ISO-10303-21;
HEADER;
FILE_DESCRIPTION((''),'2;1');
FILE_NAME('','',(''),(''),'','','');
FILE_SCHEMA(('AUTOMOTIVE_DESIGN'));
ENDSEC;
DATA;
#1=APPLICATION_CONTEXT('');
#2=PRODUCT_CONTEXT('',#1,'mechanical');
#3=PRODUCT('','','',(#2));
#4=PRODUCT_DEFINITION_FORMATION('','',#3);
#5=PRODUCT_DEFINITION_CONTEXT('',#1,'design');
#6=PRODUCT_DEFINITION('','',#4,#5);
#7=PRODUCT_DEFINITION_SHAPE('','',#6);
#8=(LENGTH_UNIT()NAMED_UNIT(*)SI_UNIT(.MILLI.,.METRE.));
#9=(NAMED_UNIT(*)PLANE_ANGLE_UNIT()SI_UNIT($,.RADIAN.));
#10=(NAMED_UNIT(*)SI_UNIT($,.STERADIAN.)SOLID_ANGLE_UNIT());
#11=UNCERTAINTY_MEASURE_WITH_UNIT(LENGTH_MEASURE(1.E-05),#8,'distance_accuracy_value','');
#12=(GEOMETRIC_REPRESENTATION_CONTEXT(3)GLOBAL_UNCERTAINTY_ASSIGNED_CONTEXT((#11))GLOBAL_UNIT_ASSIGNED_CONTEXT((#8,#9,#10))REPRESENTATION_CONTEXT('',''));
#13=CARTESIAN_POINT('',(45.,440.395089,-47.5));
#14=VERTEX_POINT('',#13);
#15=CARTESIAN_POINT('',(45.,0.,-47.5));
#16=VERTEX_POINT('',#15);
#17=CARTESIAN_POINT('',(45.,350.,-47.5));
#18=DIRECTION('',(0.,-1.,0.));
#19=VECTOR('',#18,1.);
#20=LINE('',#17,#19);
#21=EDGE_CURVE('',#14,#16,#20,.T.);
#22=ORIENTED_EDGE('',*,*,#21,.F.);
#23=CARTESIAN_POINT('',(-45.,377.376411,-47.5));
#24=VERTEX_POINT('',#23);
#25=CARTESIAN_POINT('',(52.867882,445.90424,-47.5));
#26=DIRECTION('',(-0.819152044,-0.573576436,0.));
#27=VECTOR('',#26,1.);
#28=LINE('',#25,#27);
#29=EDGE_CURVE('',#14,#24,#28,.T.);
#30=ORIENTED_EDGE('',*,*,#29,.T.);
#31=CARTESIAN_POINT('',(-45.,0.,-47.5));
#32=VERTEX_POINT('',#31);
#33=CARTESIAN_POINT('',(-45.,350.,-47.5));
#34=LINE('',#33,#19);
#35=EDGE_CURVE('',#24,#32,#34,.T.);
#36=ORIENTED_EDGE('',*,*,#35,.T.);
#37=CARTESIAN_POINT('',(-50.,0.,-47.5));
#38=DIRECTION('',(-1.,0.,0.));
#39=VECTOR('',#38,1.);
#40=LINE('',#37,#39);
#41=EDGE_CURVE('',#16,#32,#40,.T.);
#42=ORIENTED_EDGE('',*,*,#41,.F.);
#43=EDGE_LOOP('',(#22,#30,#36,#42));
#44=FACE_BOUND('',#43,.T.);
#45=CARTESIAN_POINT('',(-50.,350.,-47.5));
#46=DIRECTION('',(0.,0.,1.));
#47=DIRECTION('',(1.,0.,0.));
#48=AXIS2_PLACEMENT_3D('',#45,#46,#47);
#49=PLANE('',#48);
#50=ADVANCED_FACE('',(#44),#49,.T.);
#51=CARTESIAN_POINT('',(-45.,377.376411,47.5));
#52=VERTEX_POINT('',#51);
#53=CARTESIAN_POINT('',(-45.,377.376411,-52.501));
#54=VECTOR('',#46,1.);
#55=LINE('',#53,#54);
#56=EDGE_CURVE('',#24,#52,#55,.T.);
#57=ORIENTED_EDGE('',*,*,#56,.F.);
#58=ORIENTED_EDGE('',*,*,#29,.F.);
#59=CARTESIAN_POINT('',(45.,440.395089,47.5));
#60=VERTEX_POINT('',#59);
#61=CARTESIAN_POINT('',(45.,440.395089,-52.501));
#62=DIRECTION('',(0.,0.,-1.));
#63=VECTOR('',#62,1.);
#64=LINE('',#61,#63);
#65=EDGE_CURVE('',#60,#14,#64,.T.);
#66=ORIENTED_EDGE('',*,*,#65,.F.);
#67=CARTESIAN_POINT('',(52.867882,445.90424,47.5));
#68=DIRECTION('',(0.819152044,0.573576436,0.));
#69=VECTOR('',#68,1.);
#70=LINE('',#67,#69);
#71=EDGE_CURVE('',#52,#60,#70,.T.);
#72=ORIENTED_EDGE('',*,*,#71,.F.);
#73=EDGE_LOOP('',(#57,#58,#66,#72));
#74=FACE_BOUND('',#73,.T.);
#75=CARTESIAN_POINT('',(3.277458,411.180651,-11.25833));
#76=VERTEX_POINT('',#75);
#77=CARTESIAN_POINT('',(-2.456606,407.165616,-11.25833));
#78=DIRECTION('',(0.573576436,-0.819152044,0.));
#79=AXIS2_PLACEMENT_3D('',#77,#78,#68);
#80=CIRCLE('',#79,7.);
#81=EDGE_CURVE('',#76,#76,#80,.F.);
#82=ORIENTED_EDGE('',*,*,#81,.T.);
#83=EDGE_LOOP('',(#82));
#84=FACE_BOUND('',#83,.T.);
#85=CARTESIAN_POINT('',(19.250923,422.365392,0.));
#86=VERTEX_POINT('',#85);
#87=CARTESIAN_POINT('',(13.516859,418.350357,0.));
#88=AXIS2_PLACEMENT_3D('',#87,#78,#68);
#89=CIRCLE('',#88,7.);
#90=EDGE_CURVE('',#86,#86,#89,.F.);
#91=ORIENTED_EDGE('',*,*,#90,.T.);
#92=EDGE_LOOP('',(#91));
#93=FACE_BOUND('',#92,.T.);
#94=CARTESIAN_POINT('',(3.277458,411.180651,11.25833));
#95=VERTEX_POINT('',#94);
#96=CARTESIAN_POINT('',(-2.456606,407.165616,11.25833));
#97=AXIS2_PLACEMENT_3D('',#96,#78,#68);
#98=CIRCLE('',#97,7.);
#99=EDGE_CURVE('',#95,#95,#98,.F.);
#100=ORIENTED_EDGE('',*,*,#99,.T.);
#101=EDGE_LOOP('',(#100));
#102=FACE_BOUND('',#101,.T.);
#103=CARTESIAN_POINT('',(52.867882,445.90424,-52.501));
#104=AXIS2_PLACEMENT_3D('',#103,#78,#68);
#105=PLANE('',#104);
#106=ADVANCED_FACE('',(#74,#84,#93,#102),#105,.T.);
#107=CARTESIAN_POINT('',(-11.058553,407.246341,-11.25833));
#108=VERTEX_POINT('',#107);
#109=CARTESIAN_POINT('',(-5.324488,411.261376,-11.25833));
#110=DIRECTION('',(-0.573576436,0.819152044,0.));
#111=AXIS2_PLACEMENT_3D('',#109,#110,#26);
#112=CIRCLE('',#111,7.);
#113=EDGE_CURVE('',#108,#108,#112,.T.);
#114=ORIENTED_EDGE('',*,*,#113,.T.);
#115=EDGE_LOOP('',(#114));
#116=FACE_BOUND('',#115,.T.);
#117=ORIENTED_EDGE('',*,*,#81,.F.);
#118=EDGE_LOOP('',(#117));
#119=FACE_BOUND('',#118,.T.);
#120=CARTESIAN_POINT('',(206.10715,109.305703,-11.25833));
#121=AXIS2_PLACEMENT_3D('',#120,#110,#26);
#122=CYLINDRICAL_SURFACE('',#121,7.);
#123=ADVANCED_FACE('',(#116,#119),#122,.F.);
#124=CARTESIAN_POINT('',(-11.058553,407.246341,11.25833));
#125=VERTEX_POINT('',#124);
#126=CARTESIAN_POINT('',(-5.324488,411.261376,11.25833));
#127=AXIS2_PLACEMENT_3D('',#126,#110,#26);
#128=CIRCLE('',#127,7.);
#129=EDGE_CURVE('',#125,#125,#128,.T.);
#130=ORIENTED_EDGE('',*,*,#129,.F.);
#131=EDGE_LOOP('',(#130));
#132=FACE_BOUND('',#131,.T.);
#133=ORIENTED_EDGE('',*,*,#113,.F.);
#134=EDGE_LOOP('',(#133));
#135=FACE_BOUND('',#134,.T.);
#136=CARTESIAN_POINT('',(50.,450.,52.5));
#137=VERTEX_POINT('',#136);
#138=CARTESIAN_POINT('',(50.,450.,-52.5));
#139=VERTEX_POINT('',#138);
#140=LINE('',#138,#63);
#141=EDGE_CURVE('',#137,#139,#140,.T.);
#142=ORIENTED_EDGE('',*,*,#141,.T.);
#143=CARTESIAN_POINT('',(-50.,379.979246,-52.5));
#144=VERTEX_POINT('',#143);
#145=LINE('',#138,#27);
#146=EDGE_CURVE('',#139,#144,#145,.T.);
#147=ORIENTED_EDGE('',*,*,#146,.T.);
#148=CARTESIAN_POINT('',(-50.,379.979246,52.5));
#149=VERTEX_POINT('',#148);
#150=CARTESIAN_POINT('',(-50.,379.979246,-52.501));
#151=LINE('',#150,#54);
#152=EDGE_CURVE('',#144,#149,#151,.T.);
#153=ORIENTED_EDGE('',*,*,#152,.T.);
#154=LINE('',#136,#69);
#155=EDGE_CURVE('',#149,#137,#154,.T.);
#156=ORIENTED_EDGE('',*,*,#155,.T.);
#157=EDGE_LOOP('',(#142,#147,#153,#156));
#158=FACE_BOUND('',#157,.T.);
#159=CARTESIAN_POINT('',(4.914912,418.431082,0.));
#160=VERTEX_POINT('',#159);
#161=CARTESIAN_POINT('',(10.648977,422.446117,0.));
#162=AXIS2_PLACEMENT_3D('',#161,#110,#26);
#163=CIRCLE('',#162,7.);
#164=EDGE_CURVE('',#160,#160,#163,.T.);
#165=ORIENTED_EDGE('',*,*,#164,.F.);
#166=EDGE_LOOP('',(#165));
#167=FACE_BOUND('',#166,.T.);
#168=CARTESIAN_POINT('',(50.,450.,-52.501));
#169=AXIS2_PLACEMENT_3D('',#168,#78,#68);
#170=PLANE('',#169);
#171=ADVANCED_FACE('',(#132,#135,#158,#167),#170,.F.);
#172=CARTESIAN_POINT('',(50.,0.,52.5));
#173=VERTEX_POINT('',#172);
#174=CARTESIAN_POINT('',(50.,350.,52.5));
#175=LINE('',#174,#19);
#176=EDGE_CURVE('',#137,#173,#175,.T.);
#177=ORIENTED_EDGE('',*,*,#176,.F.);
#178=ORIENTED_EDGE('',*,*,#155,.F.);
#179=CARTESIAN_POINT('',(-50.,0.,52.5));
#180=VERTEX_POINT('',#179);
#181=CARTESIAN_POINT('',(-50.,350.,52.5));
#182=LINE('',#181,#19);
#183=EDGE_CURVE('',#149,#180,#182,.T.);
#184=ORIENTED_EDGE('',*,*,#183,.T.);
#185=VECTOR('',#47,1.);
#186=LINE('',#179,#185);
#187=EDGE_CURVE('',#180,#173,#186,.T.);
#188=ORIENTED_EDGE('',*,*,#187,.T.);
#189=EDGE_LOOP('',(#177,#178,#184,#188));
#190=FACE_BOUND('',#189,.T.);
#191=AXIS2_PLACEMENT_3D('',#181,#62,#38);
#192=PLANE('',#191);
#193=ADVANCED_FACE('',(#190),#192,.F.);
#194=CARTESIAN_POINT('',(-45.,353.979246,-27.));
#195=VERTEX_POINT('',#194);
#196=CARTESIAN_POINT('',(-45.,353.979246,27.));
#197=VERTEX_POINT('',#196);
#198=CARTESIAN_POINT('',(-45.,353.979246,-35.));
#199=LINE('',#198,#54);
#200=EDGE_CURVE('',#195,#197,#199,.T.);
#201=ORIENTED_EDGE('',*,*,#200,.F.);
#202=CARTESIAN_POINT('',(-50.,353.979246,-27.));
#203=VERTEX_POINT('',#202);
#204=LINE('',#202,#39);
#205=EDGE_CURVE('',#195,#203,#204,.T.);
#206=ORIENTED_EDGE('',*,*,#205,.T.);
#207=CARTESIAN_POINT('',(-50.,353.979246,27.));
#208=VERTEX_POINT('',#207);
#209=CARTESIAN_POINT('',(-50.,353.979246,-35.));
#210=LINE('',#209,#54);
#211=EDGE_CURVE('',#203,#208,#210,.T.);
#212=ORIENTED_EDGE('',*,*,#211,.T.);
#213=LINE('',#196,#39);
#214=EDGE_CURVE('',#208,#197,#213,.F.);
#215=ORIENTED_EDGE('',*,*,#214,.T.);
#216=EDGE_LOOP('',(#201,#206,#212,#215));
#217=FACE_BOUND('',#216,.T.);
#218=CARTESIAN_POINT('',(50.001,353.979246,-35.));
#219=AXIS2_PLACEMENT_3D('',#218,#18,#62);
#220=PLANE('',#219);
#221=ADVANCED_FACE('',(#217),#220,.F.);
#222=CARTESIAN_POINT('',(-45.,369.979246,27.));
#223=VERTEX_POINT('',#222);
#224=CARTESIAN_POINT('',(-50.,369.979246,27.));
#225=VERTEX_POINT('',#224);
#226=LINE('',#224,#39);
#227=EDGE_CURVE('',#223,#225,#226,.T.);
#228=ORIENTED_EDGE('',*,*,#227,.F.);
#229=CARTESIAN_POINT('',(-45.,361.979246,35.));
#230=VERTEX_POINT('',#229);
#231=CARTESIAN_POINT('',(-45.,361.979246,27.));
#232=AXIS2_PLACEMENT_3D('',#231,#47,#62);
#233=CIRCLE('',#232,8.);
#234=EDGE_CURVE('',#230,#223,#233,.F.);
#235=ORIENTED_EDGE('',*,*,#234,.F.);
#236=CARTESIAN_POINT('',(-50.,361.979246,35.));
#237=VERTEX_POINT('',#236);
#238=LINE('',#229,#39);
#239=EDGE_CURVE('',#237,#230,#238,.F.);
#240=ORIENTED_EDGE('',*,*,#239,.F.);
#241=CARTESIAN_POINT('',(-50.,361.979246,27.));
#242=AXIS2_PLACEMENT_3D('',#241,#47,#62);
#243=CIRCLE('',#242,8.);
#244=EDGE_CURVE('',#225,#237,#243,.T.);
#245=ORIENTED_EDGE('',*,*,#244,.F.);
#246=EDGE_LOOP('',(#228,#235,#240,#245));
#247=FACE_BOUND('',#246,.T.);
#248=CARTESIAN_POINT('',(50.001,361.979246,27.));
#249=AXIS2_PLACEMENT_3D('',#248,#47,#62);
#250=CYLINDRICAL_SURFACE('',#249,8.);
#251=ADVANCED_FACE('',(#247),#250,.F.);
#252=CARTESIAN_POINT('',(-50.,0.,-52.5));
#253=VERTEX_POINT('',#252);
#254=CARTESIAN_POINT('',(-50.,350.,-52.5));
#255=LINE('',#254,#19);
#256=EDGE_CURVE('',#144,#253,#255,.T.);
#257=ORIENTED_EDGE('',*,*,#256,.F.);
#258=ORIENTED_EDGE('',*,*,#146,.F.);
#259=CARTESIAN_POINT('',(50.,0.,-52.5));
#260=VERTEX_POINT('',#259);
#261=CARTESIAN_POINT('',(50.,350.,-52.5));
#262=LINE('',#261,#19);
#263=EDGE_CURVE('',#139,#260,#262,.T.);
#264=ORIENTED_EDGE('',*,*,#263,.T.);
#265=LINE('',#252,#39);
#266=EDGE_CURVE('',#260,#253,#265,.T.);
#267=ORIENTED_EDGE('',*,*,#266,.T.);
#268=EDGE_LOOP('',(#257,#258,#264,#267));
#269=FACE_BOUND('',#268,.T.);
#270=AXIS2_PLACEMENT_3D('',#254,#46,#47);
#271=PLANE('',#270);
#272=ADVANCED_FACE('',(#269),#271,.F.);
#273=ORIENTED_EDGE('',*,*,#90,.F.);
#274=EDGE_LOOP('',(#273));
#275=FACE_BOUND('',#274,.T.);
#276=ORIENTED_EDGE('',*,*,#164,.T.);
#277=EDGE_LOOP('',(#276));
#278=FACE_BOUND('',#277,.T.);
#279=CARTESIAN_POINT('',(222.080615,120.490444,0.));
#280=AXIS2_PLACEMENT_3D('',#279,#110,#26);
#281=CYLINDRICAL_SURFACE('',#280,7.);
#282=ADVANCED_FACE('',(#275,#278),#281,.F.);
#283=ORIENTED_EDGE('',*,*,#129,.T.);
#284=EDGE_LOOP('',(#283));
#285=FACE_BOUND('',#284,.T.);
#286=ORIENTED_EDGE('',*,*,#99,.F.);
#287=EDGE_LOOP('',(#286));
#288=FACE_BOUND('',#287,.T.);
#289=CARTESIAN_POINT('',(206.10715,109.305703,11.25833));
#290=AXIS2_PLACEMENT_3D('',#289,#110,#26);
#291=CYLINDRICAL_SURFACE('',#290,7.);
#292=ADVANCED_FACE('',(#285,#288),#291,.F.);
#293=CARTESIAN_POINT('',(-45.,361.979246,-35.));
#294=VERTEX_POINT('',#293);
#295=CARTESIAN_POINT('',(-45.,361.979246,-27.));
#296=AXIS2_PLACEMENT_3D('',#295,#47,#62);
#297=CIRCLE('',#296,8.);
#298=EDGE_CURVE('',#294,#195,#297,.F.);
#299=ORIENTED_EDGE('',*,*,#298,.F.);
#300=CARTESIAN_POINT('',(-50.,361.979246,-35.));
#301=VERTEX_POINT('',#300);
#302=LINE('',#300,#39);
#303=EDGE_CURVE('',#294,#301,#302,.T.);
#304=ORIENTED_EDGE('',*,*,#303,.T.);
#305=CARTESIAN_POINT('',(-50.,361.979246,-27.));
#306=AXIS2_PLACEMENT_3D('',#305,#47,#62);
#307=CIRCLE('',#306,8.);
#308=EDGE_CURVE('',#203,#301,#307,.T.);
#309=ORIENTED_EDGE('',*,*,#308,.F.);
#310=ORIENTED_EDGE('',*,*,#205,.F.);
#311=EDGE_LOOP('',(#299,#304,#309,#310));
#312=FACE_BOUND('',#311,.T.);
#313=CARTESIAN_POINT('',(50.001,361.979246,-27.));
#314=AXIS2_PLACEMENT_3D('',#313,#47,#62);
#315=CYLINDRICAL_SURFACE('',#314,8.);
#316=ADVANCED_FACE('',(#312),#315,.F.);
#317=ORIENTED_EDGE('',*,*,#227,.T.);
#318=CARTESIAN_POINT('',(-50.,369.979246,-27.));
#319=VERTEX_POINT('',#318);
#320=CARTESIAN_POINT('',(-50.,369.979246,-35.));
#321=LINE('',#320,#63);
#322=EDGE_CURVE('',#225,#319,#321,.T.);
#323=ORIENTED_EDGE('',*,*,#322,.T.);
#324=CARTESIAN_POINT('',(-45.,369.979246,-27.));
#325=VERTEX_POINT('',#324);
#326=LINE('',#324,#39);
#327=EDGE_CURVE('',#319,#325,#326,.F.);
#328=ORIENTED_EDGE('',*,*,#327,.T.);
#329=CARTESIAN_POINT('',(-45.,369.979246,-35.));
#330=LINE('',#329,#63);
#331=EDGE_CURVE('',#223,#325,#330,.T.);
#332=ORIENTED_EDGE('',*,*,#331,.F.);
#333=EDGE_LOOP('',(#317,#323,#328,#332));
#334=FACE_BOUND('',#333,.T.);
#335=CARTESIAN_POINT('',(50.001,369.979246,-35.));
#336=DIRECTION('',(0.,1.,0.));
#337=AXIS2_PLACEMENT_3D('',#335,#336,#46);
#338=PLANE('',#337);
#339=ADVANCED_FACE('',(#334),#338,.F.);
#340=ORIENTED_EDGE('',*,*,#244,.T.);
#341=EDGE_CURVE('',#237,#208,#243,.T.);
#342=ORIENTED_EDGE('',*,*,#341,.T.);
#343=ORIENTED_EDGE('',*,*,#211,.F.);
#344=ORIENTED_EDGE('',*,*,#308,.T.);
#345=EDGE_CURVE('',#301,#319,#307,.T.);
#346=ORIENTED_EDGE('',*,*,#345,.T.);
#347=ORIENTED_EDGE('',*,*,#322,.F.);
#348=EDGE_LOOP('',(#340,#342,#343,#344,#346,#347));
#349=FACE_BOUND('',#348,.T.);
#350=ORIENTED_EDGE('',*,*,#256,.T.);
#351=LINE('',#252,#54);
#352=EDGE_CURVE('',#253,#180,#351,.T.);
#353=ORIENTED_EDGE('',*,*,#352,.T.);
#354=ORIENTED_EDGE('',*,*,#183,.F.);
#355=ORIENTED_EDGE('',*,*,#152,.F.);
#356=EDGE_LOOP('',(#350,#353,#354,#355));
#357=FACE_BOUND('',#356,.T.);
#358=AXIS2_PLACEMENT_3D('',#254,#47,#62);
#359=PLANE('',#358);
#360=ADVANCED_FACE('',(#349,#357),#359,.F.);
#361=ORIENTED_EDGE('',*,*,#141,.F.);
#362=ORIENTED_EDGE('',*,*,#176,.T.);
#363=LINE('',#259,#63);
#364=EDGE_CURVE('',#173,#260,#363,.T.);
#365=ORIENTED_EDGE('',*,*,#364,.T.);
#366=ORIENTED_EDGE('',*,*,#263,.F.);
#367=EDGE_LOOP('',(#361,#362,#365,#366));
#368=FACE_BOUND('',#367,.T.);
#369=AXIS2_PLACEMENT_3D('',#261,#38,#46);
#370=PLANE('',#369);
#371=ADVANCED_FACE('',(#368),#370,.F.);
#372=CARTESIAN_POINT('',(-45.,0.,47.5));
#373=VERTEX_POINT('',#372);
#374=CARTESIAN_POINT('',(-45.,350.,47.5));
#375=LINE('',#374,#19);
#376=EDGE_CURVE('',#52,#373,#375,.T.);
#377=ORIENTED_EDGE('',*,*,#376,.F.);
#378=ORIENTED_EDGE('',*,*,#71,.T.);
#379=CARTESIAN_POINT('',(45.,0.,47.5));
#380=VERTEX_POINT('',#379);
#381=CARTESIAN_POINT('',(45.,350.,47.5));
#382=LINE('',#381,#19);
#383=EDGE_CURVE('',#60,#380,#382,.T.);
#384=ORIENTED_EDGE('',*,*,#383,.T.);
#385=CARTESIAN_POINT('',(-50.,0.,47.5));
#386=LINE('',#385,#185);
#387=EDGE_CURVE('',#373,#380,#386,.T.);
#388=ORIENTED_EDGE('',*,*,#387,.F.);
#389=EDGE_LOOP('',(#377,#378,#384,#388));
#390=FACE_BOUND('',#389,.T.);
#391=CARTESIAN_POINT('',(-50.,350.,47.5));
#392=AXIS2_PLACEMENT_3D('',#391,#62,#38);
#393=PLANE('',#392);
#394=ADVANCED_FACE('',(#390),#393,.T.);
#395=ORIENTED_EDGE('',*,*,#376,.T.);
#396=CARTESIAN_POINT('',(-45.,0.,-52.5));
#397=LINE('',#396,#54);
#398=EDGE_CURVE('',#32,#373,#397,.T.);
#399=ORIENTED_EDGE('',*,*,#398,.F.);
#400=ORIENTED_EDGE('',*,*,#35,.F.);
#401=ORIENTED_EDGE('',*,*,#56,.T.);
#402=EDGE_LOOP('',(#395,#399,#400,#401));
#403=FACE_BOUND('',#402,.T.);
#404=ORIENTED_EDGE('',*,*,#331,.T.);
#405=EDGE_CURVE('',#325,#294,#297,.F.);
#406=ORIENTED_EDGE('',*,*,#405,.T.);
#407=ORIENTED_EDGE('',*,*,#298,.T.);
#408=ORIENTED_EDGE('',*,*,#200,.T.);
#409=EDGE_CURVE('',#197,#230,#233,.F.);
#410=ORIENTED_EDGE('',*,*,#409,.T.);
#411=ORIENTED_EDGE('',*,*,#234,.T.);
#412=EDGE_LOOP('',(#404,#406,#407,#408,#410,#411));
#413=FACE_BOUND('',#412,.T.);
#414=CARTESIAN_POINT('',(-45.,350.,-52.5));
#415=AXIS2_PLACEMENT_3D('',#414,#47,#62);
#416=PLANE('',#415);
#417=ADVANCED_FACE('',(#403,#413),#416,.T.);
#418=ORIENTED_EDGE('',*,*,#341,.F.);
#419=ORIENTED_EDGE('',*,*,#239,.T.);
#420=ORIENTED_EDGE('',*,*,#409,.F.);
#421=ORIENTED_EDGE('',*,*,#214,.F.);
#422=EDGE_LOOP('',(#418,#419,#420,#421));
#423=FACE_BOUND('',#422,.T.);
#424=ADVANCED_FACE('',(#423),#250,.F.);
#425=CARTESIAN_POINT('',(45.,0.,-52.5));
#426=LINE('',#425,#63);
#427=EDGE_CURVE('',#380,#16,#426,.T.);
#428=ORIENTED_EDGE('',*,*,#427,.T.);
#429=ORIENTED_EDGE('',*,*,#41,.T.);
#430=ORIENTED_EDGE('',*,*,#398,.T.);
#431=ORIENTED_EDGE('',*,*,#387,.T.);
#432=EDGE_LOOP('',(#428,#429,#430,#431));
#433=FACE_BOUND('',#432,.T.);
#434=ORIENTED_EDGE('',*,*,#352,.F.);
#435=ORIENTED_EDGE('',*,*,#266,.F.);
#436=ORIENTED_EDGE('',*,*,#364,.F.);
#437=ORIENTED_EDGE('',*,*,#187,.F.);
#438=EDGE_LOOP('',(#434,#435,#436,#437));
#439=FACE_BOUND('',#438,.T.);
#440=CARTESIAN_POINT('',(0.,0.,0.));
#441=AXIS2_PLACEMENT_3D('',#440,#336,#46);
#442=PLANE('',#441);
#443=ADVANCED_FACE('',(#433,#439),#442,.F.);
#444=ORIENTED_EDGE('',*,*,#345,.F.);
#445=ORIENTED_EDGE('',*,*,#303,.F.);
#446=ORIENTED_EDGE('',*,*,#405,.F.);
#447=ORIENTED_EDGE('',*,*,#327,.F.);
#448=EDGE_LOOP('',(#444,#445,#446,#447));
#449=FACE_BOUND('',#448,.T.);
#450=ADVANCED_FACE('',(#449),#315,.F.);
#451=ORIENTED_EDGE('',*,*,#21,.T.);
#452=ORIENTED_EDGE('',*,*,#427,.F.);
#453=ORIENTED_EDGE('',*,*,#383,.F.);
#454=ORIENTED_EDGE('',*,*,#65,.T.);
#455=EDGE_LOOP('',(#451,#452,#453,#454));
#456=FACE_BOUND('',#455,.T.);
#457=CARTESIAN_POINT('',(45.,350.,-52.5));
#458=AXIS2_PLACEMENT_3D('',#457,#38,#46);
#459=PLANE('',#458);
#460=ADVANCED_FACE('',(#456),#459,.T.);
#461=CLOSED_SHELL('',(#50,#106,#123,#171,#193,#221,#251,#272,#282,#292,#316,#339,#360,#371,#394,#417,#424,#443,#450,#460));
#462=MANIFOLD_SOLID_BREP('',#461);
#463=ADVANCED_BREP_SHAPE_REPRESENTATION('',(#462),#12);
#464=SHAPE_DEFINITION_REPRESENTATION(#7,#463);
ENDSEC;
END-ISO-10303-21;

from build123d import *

# Parameters (mm, degrees)
SKETCH1_W           = 100
SKETCH1_H           = 105
BOSS_EXTRUDE1_DEPTH = 350
SKETCH2_W           = 100
SKETCH2_H           = 105
BOSS_EXTRUDE2_DEPTH = 100
CUT_EXTRUDE1_REACH  = 466.785
SHELL1_T            = -5
CUT_EXTRUDE2_REACH  = 376.584
SKETCH4_R           = 7
CUT_EXTRUDE3_REACH  = 465.957
SKETCH5_W           = 70
SKETCH5_H           = 16
FILLET1_R           = 8


with BuildPart() as part:
    # Sketch1 → Boss-Extrude1 (new body)
    with BuildSketch(Plane(origin=(0, 0, 0), x_dir=(1, 0, 0), z_dir=(0, 1, 0))):
        Rectangle(SKETCH1_W, SKETCH1_H)
    extrude(amount=BOSS_EXTRUDE1_DEPTH)

    # Sketch2 → Boss-Extrude2 (add)
    with BuildSketch(Plane(origin=(0, 350, 0), x_dir=(1, 0, 0), z_dir=(0, 1, 0))):
        Rectangle(SKETCH2_W, SKETCH2_H)
    extrude(amount=BOSS_EXTRUDE2_DEPTH)

    # Sketch3 → Cut-Extrude1 (cut, up to next)
    with BuildSketch(Plane.XY.offset(52.5), mode=Mode.PRIVATE) as cut_extrude1_sk1:
        Polygon((-50, 450), (50, 450), (-50, 379.979246179), align=None)
    cut_extrude1_tool1 = extrude(cut_extrude1_sk1.sketch, amount=-CUT_EXTRUDE1_REACH, mode=Mode.PRIVATE) & part.part
    add(cut_extrude1_tool1.solids().sort_by_distance((-16.666667, 426.659749, 52.5))[0], mode=Mode.SUBTRACT)

    # Shell1
    shell1_openings = [part.faces().sort_by_distance(p)[0] for p in [
        (0, 0, 0),
    ]]
    offset(amount=SHELL1_T, openings=shell1_openings, kind=Kind.INTERSECTION)

    # Sketch4 → Cut-Extrude2 (cut, up to next)
    with BuildSketch(Plane(origin=(-194.98134326, 278.462216729, 0), x_dir=(0.8191520442889949, 0.5735764363510417, 0), z_dir=(-0.5735764363510417, 0.819152044288995, 0)), mode=Mode.PRIVATE) as cut_extrude2_sk1:
        with Locations(Location((251.028269134, 0, 0), (0, 0, 180))):
            Circle(SKETCH4_R)
    cut_extrude2_tool1 = extrude(cut_extrude2_sk1.sketch, amount=-CUT_EXTRUDE2_REACH, mode=Mode.PRIVATE) & part.part
    # Sketch4 → Cut-Extrude2 (cut, up to next)
    with BuildSketch(Plane(origin=(-194.98134326, 278.462216729, 0), x_dir=(0.8191520442889949, 0.5735764363510417, 0), z_dir=(-0.5735764363510417, 0.819152044288995, 0)), mode=Mode.PRIVATE) as cut_extrude2_sk2:
        with Locations(Location((231.528269134, -11.258330249, 0), (0, 0, 180))):
            Circle(SKETCH4_R)
    cut_extrude2_tool2 = extrude(cut_extrude2_sk2.sketch, amount=-CUT_EXTRUDE2_REACH, mode=Mode.PRIVATE) & part.part
    # Sketch4 → Cut-Extrude2 (cut, up to next)
    with BuildSketch(Plane(origin=(-194.98134326, 278.462216729, 0), x_dir=(0.8191520442889949, 0.5735764363510417, 0), z_dir=(-0.5735764363510417, 0.819152044288995, 0)), mode=Mode.PRIVATE) as cut_extrude2_sk3:
        with Locations(Location((231.528269134, 11.258330249, 0), (0, 0, 180))):
            Circle(SKETCH4_R)
    cut_extrude2_tool3 = extrude(cut_extrude2_sk3.sketch, amount=-CUT_EXTRUDE2_REACH, mode=Mode.PRIVATE) & part.part
    add(cut_extrude2_tool1.solids().sort_by_distance((10.648977, 422.446117, 0))[0], mode=Mode.SUBTRACT)
    add(cut_extrude2_tool2.solids().sort_by_distance((-5.324488, 411.261376, 11.25833))[0], mode=Mode.SUBTRACT)
    add(cut_extrude2_tool3.solids().sort_by_distance((-5.324488, 411.261376, -11.25833))[0], mode=Mode.SUBTRACT)

    # Sketch5 → Cut-Extrude3 (cut, up to next)
    with BuildSketch(Plane.ZY.offset(50), mode=Mode.PRIVATE) as cut_extrude3_sk1:
        with Locations((0, 361.979246179)):
            Rectangle(SKETCH5_W, SKETCH5_H)
    cut_extrude3_tool1 = extrude(cut_extrude3_sk1.sketch, amount=-CUT_EXTRUDE3_REACH, mode=Mode.PRIVATE) & part.part
    add(cut_extrude3_tool1.solids().sort_by_distance((-50, 361.979246, 0))[0], mode=Mode.SUBTRACT)

    # Fillet1
    fillet1_edges = [part.edges().sort_by_distance(p)[0] for p in [
        (-47.5, 353.979246179, 35),
        (-47.5, 369.979246179, 35),
        (-47.5, 353.979246179, -35),
        (-47.5, 369.979246179, -35),
    ]]
    fillet(fillet1_edges, radius=FILLET1_R - 0.0001)  # a hair under: the kernel refuses the full size


solid = part.part
